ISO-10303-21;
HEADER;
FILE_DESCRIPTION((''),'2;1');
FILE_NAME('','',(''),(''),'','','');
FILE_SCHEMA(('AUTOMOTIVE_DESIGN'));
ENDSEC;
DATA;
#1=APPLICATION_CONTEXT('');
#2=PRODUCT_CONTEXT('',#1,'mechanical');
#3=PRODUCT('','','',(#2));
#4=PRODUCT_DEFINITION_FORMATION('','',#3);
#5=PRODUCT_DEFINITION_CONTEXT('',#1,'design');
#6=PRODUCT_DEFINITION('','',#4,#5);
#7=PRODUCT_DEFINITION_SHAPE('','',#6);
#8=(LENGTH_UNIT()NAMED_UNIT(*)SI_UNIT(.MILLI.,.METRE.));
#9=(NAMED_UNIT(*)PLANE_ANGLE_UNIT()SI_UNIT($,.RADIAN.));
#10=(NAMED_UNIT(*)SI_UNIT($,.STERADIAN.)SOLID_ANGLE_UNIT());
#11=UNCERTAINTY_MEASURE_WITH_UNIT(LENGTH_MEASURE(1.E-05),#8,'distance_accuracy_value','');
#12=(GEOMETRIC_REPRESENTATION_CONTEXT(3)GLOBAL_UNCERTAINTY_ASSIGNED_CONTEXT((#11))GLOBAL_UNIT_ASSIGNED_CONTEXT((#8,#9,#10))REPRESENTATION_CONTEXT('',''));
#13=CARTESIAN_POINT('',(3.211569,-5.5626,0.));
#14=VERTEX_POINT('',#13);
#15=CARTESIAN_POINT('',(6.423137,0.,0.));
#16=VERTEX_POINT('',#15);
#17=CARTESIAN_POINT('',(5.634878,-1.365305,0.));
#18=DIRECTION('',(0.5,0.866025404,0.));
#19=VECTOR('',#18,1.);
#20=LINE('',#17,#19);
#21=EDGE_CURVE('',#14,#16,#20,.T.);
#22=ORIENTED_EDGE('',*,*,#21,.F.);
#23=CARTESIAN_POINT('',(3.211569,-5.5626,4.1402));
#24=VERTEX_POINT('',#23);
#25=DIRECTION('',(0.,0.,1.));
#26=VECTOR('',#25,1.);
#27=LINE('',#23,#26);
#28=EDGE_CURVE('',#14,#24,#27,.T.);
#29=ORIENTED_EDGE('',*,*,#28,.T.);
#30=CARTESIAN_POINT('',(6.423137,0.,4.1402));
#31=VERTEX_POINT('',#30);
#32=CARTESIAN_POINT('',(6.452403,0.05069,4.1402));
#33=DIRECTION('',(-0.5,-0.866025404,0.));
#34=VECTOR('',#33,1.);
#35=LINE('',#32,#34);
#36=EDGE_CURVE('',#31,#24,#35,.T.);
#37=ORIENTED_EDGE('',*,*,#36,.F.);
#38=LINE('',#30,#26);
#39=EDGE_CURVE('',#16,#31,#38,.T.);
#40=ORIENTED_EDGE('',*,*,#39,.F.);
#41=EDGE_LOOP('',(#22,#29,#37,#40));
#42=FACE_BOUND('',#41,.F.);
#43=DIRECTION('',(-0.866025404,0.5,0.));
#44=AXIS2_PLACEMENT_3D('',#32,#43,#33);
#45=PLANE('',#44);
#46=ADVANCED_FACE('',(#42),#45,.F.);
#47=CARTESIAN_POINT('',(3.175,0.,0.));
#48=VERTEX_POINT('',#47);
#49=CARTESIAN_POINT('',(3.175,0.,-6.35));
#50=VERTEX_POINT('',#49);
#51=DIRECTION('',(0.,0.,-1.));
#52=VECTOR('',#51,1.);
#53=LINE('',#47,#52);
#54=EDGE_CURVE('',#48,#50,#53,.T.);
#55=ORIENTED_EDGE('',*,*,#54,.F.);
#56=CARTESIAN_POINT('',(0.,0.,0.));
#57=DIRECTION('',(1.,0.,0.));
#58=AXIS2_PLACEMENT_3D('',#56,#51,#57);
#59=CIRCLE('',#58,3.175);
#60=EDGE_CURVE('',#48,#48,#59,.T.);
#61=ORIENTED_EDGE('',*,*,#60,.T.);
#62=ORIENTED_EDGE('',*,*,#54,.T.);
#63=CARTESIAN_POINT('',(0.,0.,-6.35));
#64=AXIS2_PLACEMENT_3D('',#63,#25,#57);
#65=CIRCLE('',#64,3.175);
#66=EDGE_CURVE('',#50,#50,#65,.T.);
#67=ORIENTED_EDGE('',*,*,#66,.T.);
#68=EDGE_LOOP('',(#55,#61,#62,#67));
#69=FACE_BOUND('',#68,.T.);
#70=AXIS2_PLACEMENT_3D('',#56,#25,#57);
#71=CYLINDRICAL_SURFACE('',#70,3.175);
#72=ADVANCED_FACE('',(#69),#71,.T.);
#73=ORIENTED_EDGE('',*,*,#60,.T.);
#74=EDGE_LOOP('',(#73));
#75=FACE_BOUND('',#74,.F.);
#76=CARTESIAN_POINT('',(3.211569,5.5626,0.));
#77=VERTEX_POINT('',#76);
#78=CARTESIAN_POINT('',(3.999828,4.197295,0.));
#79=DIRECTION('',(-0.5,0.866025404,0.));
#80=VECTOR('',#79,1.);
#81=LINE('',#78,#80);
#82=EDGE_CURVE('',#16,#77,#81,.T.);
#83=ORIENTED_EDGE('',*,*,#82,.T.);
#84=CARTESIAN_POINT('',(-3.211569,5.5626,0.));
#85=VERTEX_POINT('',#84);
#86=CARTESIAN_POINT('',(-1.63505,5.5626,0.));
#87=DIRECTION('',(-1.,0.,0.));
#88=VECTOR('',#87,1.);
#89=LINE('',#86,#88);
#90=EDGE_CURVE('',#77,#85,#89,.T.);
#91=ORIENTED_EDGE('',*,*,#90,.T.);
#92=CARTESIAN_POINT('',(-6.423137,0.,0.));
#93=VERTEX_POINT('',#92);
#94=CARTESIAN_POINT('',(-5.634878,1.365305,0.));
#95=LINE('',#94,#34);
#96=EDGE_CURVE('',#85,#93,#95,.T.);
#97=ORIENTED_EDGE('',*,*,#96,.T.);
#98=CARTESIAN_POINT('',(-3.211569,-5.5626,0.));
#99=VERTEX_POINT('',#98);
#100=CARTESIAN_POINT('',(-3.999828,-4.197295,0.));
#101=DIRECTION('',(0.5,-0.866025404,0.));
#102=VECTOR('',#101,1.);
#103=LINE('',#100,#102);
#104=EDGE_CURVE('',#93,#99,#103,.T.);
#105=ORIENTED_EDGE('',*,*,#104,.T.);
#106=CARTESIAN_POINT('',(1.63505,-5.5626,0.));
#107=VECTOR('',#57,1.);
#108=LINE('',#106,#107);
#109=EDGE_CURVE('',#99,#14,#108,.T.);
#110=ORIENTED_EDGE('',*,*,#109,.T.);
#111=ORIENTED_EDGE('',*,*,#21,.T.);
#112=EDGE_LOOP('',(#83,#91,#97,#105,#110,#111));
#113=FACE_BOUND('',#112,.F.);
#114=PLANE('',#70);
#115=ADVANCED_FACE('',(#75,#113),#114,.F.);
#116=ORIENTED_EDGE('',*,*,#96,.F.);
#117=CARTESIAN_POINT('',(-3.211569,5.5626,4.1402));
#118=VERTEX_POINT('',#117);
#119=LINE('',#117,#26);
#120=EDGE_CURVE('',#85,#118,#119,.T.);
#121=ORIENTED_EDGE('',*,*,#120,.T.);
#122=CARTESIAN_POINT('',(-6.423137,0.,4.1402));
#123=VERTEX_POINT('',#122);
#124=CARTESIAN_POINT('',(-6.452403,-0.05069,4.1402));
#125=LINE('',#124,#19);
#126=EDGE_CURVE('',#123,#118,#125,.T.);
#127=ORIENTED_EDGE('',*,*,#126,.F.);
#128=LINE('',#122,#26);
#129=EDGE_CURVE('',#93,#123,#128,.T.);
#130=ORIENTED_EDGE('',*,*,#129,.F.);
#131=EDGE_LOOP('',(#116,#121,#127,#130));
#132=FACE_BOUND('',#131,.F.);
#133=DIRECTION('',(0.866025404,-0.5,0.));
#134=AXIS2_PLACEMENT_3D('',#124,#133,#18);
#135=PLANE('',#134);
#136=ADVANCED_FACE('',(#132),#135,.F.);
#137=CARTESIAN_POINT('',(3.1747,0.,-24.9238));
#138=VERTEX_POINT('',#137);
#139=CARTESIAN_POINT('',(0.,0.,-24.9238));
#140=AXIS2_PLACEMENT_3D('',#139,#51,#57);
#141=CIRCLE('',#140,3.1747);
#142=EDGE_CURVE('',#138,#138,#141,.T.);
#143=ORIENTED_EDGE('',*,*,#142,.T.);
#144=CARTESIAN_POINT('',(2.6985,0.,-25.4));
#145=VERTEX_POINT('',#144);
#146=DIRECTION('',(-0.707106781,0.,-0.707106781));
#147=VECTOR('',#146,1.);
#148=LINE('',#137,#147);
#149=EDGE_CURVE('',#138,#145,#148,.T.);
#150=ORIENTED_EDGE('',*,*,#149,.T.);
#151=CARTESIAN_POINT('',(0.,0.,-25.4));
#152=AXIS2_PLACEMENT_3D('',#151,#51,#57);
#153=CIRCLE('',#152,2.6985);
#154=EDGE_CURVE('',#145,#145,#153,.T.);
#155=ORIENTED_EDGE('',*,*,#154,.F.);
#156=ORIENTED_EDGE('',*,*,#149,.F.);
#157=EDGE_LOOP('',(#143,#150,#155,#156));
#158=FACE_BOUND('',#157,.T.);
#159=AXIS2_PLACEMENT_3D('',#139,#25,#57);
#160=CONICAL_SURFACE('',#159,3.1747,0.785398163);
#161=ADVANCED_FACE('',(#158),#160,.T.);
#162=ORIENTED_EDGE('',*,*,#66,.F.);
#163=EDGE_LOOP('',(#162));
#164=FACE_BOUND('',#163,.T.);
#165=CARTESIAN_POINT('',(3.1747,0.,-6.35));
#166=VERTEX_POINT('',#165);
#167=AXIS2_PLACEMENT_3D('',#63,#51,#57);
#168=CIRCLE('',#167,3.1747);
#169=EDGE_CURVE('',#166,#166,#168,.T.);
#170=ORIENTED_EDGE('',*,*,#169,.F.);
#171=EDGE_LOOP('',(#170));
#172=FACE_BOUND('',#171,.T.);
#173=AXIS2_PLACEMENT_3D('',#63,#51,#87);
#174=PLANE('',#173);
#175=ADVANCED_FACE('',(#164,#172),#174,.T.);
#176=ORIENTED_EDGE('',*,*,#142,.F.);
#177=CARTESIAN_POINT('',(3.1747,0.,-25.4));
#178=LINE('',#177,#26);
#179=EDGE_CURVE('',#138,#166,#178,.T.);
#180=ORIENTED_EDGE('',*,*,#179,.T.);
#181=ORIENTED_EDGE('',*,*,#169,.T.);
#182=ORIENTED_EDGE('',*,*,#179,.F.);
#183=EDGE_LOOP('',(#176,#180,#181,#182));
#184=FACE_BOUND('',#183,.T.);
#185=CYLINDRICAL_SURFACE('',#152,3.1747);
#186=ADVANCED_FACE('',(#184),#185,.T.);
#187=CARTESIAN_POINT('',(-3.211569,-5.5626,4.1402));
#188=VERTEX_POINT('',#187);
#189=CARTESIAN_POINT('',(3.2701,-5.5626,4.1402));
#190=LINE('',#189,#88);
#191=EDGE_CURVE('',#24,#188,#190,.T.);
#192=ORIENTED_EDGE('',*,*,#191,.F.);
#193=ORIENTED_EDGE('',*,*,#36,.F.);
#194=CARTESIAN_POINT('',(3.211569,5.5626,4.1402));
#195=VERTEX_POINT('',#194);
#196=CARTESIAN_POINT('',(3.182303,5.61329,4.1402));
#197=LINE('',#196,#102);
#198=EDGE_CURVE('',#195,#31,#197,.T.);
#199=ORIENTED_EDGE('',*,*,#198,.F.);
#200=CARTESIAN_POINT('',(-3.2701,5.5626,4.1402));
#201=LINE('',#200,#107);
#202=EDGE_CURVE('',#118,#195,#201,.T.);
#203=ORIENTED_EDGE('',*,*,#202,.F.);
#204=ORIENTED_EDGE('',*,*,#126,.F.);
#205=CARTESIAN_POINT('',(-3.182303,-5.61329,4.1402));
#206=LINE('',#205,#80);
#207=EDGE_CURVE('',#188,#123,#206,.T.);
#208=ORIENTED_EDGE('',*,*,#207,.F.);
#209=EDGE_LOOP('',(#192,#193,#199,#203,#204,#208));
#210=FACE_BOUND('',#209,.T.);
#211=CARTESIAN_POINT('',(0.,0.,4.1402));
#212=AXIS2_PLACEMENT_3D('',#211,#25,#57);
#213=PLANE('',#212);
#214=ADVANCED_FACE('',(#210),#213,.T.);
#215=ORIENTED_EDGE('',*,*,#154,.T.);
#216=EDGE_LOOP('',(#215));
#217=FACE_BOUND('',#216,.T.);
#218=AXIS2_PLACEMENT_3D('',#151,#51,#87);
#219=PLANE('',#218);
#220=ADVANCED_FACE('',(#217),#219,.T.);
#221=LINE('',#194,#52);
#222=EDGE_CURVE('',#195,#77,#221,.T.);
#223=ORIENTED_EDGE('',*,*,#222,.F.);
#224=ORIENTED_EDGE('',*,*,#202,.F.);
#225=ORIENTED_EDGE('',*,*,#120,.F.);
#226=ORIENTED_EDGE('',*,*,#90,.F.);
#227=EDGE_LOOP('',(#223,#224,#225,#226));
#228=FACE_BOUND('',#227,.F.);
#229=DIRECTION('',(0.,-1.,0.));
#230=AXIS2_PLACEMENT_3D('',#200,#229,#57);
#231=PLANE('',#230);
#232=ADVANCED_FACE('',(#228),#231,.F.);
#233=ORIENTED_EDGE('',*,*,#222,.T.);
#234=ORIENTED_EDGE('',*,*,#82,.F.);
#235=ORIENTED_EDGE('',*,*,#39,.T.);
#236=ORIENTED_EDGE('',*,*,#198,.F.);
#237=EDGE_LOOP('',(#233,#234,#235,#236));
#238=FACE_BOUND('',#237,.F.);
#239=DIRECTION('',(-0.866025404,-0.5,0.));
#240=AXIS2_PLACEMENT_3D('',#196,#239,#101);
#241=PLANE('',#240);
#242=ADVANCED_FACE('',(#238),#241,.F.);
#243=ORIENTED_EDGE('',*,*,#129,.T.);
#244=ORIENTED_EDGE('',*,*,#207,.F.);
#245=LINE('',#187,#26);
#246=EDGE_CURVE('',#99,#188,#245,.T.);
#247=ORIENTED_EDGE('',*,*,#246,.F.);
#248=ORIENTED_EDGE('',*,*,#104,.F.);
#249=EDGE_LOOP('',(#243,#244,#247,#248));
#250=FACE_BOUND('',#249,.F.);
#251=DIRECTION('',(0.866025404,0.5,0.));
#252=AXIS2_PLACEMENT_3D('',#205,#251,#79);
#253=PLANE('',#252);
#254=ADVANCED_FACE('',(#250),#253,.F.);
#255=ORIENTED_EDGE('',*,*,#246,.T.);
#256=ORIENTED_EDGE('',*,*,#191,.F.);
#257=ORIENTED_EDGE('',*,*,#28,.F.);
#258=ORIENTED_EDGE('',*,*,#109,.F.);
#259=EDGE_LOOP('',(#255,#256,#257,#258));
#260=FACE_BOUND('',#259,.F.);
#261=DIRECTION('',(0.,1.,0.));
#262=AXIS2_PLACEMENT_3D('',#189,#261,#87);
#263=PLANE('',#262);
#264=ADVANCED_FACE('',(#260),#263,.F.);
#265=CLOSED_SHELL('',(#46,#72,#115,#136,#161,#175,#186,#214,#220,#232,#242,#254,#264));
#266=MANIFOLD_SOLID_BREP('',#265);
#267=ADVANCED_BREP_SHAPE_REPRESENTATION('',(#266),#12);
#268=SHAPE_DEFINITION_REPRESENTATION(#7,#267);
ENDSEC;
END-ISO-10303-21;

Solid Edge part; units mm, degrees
sketch "Sketch1" plane through (0, 0, 0) normal (0, 0, 1) x (1, 0, 0)
  circle A0 centre (0, 0) radius 6.4526
  dimension "D1" = 12.9052
extrude "Protrusion1" add sketch "Sketch1" along normal blind 4.1402
sketch "Sketch2" plane through (0, 0, 0) normal (0, 0, -1) x (1, 0, 0)
  circle A0 centre (0, 0) radius 3.175
extrude "Protrusion2" add sketch "Sketch2" along normal blind 25.4
sketch "Sketch3" plane through (0, 0, -25.4) normal (0, 0, -1) x (1, 0, 0)
  circle A0 centre (0, 0) radius 3.1747
extrude "Cutout1" cut sketch "Sketch3" against normal blind 19.05 flip side to cut
chamfer "Chamfer_1" distance 0.4762 angle 45 1 edges at (-3.1747, 0, -25.4)
sketch "Sketch4" plane through (0, 0, 4.1402) normal (0, 0, 1) x (1, 0, 0)
  line L0 (-3.2701, 5.5626) -> (3.2701, 5.5626)
  dimension "D1" = 11.1252
extrude "Cutout2" cut sketch "Sketch4" against normal up to next material side at (0, 5.6126, 4.1402)
pattern_circular "Pattern1" count 6 over 360 about axis through (0, 0, 4.1402) along (0, 0, 1) of "Cutout2"
properties part number "24102605"
